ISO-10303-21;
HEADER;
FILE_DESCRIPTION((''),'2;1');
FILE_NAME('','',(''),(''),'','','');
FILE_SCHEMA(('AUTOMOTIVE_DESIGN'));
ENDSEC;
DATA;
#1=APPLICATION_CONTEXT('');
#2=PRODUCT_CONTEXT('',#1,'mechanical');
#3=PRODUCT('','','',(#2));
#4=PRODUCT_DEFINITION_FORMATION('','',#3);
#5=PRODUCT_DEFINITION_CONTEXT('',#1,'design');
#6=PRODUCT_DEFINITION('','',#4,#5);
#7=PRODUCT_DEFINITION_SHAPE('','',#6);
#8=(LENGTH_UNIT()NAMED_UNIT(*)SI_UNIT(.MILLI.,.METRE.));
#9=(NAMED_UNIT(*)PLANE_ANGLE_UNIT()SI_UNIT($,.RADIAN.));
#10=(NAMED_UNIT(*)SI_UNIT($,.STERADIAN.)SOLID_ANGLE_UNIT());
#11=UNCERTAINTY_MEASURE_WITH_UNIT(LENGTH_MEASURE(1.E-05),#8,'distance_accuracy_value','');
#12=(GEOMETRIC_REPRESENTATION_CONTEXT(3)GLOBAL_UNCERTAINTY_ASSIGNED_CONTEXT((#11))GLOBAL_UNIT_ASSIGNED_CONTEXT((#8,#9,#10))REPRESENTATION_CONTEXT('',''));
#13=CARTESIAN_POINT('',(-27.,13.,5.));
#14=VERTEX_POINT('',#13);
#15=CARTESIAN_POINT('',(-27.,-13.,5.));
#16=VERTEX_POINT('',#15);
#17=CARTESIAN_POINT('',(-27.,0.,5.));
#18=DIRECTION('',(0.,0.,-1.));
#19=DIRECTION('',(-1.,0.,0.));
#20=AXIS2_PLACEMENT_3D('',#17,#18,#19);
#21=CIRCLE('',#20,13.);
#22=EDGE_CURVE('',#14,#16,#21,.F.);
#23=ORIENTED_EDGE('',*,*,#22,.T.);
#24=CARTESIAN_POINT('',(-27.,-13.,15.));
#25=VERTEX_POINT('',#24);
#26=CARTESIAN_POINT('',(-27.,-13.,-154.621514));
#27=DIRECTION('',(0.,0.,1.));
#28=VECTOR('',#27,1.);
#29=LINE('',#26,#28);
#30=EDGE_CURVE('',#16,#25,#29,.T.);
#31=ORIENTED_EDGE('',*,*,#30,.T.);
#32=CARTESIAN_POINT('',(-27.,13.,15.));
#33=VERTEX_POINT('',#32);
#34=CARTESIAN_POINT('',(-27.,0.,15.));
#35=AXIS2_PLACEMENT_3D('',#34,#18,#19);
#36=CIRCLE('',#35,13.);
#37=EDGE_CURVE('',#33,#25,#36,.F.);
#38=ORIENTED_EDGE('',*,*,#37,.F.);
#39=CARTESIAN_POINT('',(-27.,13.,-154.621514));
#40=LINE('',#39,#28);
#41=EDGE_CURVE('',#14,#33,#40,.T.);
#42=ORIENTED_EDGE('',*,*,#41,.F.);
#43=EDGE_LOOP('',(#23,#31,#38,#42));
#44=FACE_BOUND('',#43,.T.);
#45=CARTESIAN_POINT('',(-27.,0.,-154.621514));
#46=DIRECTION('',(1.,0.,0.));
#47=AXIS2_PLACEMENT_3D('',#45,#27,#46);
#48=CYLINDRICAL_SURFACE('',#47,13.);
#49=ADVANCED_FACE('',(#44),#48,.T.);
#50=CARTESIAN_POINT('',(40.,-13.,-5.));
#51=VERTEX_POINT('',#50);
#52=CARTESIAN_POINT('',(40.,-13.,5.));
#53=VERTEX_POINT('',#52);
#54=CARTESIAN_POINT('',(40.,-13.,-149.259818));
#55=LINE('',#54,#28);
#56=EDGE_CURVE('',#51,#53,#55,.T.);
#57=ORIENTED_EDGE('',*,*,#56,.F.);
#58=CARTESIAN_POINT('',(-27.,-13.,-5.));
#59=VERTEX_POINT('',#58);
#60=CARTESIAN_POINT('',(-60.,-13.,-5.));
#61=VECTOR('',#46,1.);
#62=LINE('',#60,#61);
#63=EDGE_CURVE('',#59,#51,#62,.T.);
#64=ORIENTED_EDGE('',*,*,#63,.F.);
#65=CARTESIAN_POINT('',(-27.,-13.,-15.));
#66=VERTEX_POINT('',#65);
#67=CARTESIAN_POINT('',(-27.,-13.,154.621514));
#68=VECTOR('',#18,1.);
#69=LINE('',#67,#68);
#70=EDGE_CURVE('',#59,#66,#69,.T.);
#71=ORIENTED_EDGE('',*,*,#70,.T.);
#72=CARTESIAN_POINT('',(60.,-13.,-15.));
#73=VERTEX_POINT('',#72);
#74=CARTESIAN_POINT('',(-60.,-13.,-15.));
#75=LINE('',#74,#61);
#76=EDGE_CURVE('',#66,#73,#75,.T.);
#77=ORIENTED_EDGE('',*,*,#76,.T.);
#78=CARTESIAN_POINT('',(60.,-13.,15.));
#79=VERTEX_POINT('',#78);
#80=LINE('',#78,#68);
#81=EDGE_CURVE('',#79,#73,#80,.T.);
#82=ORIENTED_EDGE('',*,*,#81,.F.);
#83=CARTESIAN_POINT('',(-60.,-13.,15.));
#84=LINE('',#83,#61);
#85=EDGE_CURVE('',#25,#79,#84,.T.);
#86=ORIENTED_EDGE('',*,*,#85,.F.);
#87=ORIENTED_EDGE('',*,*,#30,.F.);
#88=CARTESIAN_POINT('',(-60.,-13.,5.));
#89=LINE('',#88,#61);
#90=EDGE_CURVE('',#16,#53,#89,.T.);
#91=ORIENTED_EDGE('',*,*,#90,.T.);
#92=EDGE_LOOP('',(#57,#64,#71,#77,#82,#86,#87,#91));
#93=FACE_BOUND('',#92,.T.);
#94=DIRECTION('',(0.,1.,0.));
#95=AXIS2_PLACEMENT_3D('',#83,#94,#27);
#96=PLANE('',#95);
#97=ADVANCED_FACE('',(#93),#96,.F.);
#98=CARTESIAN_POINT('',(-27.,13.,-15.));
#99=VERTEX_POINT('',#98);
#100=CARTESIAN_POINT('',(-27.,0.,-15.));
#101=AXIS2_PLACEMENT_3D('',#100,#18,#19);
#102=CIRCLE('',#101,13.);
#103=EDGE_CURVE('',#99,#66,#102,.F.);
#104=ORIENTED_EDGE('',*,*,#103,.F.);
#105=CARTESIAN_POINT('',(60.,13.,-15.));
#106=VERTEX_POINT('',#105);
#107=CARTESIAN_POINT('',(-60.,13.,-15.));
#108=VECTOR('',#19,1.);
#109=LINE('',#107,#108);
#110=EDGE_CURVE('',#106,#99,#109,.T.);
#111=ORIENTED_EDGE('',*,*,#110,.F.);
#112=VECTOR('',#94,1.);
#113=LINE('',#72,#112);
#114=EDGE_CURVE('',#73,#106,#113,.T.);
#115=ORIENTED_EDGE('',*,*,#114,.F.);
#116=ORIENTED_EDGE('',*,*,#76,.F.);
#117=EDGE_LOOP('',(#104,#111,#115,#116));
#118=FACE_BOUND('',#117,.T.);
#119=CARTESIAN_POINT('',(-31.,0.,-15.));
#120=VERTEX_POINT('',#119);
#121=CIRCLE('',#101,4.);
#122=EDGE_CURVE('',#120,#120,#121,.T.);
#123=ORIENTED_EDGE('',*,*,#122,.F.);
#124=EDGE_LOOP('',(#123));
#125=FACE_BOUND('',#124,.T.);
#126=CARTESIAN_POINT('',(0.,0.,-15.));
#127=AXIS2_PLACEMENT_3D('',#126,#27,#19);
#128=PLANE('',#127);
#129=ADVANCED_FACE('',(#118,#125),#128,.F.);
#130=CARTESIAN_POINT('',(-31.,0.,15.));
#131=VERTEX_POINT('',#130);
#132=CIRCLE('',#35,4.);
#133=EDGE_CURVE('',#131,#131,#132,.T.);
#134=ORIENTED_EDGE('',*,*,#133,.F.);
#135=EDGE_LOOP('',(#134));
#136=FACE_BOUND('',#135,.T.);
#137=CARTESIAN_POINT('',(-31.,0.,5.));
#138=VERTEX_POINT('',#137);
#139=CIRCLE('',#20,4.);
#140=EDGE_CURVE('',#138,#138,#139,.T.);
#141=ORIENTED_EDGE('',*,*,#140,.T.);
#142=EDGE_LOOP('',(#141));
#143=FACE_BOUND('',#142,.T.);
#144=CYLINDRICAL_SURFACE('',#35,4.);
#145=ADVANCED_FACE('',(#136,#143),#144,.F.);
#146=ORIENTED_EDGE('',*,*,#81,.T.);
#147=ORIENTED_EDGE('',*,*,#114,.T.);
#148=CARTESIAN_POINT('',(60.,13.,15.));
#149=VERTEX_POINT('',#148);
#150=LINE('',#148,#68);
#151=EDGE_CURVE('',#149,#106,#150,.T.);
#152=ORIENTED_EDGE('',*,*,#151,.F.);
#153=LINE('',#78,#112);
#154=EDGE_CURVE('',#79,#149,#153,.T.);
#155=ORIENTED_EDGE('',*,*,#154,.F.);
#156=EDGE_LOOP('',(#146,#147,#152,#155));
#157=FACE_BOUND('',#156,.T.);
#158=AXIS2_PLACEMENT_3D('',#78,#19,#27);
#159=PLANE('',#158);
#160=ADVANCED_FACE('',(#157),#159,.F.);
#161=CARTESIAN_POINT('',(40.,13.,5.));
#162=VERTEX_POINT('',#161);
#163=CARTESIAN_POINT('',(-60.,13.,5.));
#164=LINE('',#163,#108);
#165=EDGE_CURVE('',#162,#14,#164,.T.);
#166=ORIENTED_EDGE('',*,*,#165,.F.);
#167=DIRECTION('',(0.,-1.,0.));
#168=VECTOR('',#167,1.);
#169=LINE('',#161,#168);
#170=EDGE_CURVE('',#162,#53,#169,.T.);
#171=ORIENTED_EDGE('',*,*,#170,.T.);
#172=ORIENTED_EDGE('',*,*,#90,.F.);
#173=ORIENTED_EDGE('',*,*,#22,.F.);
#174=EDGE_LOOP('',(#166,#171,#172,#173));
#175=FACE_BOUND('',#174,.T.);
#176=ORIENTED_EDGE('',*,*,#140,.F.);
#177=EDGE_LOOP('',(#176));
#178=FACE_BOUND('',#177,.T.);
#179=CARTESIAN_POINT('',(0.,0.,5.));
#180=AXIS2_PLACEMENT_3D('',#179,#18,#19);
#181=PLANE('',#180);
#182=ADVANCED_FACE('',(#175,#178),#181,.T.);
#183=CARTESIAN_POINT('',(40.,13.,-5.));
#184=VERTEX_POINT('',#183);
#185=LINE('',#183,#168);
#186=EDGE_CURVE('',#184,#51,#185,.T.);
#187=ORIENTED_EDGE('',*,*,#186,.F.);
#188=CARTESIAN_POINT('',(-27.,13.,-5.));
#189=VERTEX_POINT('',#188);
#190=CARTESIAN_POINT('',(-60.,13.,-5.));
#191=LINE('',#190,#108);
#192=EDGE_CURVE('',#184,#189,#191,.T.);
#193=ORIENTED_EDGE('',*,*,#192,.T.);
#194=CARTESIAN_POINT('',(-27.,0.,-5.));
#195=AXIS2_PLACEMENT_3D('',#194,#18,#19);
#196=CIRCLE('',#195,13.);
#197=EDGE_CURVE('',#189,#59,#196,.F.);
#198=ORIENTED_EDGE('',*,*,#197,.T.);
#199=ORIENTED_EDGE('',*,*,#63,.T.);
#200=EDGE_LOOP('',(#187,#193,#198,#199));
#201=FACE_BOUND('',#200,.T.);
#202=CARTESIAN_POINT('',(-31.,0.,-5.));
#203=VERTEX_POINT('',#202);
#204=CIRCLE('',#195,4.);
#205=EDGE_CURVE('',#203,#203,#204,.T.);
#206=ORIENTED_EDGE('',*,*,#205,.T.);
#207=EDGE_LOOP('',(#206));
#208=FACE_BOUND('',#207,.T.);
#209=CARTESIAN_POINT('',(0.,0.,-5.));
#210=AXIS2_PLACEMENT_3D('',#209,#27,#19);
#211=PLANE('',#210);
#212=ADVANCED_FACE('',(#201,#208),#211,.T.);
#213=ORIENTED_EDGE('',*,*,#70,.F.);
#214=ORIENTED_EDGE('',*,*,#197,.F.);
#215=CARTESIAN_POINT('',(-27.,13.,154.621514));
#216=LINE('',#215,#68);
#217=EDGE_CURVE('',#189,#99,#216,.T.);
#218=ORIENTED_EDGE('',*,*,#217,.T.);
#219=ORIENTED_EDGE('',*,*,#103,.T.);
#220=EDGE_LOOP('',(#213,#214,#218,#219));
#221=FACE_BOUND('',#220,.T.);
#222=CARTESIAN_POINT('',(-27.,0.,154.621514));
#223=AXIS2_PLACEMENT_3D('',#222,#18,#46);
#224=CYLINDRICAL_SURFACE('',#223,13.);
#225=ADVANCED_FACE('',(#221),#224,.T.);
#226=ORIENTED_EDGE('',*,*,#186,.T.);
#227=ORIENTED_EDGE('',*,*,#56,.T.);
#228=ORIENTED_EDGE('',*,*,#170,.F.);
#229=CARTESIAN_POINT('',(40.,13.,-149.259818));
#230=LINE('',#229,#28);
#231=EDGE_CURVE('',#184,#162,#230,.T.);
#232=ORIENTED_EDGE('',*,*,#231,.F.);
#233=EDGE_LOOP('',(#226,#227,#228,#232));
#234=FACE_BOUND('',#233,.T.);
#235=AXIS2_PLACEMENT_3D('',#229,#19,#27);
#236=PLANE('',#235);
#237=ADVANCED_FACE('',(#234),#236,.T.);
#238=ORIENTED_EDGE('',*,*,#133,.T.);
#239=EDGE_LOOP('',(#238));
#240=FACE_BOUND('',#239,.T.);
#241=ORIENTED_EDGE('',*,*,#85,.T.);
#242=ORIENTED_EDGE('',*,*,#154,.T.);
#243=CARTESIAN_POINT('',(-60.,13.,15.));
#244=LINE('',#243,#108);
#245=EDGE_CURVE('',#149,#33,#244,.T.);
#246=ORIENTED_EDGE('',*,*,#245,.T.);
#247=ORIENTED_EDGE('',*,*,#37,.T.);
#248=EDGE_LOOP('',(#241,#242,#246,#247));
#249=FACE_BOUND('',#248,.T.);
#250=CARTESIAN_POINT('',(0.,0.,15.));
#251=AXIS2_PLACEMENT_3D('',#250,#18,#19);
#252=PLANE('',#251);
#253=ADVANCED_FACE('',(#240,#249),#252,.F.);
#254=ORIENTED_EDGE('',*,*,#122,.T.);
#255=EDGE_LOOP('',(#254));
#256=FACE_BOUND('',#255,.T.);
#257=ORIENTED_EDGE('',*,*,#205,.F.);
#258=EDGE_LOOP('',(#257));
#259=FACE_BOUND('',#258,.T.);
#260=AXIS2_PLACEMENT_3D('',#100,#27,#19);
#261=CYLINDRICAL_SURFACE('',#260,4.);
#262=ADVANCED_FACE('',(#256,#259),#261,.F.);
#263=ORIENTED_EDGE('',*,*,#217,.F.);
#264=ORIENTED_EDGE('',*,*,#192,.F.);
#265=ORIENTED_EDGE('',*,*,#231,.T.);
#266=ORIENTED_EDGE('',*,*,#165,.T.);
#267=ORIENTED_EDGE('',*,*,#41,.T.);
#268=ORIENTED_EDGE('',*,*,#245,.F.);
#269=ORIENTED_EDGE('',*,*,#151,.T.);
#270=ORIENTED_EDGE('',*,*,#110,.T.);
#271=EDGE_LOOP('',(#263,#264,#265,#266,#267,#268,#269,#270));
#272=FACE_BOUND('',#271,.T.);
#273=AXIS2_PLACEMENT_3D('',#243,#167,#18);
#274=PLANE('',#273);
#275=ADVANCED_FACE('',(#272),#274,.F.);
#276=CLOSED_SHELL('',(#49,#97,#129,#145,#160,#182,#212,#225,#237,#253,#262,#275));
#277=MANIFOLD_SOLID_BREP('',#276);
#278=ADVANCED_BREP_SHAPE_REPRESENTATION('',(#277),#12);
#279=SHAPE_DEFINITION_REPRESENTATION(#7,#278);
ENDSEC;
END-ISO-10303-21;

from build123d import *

# Parameters (mm, degrees)
SKETCH_1_W                = 120
SKETCH_1_H                = 26
EXTRUDE_1_DEPTH           = 15
CUT_EXTRUDE_START         = -15
CUT_EXTRUDE_8_DEPTH       = 15
CUT_EXTRUDE_9_DEPTH       = 64.198101237
CUT_EXTRUDE_9_DEPTH_BACK  = 5
CUT_EXTRUDE_10_DEPTH      = 63.20128616
CUT_EXTRUDE_10_DEPTH_BACK = 63.20128616
SKETCH_7_R                = 4


# Read off the part's stored shape, not the designer's step: 切除-拉伸8
with BuildPart() as part:
    # 草图1 → 凸台-拉伸1 (new body)
    with BuildSketch(Plane.XY):
        Rectangle(SKETCH_1_W, SKETCH_1_H)
    extrude(amount=EXTRUDE_1_DEPTH)

    # 切除-拉伸8 outline → 切除-拉伸8 (cut)
    with BuildSketch(Plane(origin=(0, 0, 0), x_dir=(-1, 0, 0), z_dir=(0, 0, -1)).offset(CUT_EXTRUDE_START)):
        with BuildLine():
            Line((60, 13), (27, 13))
            ThreePointArc((27, 13), (40, 0), (27, -13))
            Line((27, -13), (60, -13))
            Line((60, -13), (60, 13))
        make_face()
    extrude(amount=CUT_EXTRUDE_8_DEPTH, mode=Mode.SUBTRACT)

    # 草图6 → 切除-拉伸9 (cut, two sides: drawn at the far end of the back side and taken through both)
    with BuildSketch(Plane(origin=(0, 0, 0), x_dir=(-1, 0, 0), z_dir=(0, 0, -1)).offset(-CUT_EXTRUDE_9_DEPTH_BACK)):
        Polygon((-40, 191.237926759), (-40, 13), (-40, -13), (-40, -191.237926759), (316.475853517, -191.237926759), (316.475853517, 191.237926759), align=None)
    extrude(amount=CUT_EXTRUDE_9_DEPTH + CUT_EXTRUDE_9_DEPTH_BACK, mode=Mode.SUBTRACT)

    # 草图7 → 切除-拉伸10 (cut, two sides: drawn at the far end of the back side and taken through both)
    with BuildSketch(Plane(origin=(0, 0, 5), x_dir=(-1, 0, 0), z_dir=(0, 0, -1)).offset(-CUT_EXTRUDE_10_DEPTH_BACK)):
        with Locations((27, 0)):
            Circle(SKETCH_7_R)
    extrude(amount=CUT_EXTRUDE_10_DEPTH + CUT_EXTRUDE_10_DEPTH_BACK, mode=Mode.SUBTRACT)

    # 镜向2: part across plane


with BuildPart() as part_1:
    add(part.part)
    add(part.part.mirror(Plane(origin=(0, 0, 0), x_dir=(1, 0, 0), z_dir=(0, 0, -1))))


solid = part_1.part
